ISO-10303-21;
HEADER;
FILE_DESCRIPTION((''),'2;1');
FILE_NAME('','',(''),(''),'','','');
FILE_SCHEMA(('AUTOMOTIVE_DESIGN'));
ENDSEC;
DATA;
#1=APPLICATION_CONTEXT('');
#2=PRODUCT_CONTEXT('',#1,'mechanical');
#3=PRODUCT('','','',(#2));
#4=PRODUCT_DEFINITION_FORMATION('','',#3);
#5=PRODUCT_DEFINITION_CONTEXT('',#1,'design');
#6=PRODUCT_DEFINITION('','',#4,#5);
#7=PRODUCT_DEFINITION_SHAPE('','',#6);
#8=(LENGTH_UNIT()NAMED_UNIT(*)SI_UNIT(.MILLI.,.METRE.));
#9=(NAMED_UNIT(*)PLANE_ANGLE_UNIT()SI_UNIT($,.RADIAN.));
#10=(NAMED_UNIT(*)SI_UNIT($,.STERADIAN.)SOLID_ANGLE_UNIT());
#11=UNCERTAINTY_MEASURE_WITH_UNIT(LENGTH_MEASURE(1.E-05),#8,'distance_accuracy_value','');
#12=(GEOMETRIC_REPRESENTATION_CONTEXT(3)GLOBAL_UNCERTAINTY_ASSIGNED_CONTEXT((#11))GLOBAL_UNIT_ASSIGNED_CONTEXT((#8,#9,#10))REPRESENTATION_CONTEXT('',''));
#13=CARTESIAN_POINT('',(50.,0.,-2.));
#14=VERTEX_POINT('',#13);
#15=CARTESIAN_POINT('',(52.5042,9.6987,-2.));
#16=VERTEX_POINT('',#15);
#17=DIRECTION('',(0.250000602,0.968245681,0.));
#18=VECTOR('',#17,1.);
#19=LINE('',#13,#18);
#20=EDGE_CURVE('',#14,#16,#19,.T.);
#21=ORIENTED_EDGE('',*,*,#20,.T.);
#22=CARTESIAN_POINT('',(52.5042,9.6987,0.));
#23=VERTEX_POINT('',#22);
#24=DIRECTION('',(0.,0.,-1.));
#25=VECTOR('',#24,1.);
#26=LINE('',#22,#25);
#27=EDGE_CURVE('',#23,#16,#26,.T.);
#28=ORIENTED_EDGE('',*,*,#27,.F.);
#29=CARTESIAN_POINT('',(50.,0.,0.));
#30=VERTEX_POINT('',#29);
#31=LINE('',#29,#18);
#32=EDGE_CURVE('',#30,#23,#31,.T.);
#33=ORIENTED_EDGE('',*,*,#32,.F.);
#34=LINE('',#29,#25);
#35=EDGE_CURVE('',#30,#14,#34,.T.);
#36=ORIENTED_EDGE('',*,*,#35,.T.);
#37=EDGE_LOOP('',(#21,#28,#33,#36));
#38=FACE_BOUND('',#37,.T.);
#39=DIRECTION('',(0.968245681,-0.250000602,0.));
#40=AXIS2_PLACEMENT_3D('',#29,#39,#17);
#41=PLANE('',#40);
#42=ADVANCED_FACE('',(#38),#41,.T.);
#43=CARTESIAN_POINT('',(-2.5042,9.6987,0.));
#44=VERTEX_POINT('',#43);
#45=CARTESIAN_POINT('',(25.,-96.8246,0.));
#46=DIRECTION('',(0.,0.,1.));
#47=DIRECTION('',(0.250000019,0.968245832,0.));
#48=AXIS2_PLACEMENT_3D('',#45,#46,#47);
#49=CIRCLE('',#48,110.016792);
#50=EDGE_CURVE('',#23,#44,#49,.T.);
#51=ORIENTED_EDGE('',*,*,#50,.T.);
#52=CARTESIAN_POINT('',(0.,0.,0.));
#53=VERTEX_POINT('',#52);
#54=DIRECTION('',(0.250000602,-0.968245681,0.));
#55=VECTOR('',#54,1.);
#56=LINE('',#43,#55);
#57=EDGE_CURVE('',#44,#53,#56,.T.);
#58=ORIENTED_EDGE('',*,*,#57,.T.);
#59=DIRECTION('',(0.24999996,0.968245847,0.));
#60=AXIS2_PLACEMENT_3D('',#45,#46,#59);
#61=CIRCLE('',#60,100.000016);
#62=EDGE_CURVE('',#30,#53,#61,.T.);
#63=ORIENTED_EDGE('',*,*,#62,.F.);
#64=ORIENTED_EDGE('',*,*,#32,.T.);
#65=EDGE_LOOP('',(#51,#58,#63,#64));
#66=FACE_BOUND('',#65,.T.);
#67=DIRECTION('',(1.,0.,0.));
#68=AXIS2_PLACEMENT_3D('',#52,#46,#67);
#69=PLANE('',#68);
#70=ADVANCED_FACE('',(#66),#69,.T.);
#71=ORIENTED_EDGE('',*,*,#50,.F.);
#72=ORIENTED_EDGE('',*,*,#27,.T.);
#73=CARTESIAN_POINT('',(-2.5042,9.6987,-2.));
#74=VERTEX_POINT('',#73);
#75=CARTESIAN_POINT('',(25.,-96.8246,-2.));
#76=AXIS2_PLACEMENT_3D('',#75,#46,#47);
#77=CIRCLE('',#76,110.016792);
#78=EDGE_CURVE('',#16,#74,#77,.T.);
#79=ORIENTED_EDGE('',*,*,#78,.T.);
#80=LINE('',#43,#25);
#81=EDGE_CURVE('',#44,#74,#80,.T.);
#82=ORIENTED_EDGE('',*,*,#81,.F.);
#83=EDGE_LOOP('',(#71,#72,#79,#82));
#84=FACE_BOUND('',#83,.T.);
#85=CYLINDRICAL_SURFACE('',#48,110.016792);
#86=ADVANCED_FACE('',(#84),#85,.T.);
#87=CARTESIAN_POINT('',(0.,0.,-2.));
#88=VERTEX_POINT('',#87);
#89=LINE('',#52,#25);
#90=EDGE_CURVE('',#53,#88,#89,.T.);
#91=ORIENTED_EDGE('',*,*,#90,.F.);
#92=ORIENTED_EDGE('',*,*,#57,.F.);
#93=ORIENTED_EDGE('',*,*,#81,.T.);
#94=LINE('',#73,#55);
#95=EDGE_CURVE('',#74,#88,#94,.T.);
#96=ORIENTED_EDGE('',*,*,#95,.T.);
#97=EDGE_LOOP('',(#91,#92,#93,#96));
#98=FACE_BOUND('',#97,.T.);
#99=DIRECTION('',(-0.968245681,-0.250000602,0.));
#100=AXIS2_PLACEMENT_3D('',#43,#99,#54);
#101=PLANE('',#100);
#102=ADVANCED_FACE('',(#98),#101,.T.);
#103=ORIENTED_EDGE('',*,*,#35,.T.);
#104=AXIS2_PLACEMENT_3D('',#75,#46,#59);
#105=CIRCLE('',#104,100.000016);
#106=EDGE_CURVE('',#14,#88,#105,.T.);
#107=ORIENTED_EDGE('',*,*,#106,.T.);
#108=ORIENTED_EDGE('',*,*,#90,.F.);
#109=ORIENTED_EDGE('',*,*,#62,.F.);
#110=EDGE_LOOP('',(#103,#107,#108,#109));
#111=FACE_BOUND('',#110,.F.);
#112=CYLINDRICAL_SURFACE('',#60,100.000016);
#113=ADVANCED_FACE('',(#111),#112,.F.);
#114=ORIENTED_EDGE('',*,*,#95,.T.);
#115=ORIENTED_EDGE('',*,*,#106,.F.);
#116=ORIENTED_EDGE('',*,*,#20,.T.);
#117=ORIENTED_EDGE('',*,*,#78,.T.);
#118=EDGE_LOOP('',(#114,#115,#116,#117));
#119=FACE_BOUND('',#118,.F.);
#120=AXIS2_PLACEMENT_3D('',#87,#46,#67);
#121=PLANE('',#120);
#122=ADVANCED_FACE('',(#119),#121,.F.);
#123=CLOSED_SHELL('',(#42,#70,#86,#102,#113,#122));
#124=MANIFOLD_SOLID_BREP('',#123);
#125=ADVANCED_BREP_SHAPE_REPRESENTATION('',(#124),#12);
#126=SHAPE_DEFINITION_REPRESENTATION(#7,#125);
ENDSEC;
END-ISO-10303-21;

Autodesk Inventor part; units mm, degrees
ref_plane "YZ Plane" through (0, 0, 0) normal (1, 0, 0) x (0, 1, 0)
ref_plane "XZ Plane" through (0, 0, 0) normal (0, 1, 0) x (-1, 0, 0)
sketch "Sketch1" plane through (0, 0, 0) normal (0, 0, 1) x (1, 0, 0)
  arc A0 (50, 0) -> (0, 0) centre (25, -96.8246) ccw
  arc A1 (52.5042, 9.6987) -> (-2.5042, 9.6987) centre (25, -96.8246) ccw
  line L0 (-2.5042, 9.6987) -> (0, 0)
  line L1 (50, 0) -> (52.5042, 9.6987)
ref_plane "Work Plane1" through (0, 0, -100) normal (0, 0, 1) x (1, 0, 0)
extrude "Extrusion1" add sketch "Sketch1" against normal blind 2
surface_offset "OffsetSrf2"
properties part number "Midsurf"
